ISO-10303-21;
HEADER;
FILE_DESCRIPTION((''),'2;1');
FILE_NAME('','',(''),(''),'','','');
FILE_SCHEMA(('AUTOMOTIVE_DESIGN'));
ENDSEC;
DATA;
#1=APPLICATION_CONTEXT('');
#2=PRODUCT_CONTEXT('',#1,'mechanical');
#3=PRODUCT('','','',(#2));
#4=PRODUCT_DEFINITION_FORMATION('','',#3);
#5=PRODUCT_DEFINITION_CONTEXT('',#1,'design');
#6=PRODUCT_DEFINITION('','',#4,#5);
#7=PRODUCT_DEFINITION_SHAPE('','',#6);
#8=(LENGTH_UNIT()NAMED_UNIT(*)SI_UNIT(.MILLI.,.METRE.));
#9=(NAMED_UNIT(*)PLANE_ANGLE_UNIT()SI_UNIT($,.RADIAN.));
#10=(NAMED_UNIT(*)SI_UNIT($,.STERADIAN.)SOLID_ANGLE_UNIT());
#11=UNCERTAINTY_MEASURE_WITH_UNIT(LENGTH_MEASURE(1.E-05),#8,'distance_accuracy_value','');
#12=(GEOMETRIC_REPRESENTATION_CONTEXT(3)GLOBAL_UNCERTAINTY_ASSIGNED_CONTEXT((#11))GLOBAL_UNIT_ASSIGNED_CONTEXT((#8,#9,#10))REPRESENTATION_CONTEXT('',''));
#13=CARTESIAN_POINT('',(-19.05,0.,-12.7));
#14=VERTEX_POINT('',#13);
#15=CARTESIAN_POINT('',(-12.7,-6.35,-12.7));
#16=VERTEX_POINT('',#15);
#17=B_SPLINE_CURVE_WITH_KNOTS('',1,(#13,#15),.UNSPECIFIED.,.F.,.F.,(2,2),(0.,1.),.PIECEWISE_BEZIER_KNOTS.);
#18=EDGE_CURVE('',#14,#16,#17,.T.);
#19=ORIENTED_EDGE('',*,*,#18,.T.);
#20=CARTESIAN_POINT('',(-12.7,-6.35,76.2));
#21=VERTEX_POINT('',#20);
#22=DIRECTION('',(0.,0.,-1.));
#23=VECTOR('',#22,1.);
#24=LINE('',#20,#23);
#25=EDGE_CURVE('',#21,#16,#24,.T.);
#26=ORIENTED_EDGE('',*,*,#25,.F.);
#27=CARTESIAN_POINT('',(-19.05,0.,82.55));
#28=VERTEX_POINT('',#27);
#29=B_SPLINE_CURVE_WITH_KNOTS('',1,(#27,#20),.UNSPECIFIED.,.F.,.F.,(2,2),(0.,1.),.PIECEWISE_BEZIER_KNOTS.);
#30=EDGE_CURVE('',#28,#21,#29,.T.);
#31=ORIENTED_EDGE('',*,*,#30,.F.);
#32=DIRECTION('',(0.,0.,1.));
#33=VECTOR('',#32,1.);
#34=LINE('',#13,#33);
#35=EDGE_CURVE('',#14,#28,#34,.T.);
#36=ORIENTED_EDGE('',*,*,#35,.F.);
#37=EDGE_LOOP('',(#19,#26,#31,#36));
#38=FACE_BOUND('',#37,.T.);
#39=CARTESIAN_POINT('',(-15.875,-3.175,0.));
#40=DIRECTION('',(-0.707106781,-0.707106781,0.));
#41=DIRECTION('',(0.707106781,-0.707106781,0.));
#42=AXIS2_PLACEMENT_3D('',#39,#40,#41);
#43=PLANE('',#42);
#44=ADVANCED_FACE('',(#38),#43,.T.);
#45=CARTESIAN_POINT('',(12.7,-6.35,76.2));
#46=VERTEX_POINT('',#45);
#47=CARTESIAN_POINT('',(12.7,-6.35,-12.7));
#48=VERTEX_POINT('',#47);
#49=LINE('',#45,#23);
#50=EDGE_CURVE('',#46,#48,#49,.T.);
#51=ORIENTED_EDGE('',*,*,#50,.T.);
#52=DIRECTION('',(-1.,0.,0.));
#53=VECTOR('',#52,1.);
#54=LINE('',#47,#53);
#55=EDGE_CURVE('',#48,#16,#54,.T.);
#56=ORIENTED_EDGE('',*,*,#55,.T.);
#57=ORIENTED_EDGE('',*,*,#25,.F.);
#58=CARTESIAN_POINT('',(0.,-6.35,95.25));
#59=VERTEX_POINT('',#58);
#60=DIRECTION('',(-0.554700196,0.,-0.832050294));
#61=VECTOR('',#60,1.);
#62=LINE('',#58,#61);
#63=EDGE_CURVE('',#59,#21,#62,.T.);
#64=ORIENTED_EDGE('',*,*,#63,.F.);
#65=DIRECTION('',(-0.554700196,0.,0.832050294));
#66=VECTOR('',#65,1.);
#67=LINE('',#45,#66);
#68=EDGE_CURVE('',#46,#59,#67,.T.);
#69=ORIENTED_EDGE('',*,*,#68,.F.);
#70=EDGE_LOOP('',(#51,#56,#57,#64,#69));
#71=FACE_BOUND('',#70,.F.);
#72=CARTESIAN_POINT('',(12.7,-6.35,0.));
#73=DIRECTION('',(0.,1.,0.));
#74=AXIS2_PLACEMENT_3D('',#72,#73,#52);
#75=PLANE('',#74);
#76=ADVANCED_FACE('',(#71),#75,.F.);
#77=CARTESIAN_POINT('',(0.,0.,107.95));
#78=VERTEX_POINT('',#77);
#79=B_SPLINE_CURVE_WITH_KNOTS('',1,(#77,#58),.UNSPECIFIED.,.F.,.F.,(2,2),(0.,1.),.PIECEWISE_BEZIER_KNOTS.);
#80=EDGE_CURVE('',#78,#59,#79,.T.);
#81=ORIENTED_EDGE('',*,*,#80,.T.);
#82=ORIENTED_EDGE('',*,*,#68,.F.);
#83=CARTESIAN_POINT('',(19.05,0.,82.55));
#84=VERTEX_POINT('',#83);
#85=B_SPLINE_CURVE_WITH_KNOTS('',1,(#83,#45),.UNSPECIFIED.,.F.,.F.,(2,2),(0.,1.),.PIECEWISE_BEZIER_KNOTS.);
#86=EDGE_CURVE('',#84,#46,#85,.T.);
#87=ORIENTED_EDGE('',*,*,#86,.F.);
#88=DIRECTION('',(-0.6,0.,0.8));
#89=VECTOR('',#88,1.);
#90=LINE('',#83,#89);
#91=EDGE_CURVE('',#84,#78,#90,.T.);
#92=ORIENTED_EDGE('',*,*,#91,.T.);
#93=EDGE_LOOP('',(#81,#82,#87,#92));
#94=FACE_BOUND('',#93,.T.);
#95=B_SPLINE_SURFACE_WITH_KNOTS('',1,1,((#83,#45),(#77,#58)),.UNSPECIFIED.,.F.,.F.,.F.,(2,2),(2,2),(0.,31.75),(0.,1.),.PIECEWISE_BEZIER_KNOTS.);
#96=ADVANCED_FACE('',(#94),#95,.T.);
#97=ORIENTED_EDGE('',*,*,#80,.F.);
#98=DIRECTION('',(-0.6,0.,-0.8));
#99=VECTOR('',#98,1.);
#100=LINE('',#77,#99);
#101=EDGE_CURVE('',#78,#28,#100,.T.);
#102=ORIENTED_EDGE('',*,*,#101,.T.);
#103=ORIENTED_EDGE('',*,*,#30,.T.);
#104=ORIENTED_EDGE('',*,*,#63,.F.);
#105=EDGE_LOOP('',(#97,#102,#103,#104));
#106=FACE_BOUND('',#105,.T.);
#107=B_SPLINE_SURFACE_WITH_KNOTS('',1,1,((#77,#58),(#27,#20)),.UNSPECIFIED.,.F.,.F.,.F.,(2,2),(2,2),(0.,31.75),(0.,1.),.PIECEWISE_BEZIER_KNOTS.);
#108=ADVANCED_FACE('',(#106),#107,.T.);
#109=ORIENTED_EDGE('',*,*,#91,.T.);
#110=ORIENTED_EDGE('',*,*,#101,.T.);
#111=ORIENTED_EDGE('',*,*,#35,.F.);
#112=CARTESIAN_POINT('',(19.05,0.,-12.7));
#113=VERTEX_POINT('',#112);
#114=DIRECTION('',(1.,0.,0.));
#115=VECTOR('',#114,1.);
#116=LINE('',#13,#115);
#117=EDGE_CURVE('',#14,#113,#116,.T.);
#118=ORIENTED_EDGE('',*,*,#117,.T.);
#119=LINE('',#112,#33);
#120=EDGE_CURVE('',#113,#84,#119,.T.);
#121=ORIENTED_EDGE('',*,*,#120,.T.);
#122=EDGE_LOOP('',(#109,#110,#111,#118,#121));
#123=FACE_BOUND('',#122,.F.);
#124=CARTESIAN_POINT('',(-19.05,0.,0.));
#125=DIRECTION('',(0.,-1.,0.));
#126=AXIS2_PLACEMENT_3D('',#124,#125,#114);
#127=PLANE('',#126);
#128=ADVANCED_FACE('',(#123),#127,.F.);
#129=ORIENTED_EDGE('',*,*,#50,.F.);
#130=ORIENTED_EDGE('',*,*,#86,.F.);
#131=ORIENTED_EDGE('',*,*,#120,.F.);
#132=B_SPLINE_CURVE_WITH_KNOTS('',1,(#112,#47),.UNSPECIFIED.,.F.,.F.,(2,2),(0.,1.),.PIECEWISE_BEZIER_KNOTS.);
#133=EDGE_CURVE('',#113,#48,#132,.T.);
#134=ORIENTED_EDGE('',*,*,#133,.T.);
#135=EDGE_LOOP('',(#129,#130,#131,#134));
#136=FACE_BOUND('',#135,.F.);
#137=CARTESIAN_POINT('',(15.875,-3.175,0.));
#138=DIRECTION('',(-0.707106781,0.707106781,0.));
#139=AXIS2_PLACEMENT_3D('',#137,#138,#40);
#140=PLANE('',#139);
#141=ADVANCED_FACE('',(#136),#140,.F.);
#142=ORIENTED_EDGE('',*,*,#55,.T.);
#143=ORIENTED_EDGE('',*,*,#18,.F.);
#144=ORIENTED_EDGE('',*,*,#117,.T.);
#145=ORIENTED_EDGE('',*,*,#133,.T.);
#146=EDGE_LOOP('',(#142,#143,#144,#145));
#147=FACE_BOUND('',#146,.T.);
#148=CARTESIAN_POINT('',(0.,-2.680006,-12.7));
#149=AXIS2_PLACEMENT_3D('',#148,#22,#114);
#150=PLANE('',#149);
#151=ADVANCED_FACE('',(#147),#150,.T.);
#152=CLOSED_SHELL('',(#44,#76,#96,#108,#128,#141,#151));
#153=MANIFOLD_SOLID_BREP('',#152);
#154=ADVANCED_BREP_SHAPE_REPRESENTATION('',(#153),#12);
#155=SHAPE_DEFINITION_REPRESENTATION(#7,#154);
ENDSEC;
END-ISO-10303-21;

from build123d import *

# Parameters (mm, degrees)
F5_DEPTH = 12.7


with BuildPart() as f3:
    # F0 (on Front) → F3 section 0
    with BuildSketch(Plane.XZ):
        Polygon((-19.05, 0), (0, 0), (19.05, 0), (19.05, 82.55), (0, 107.95), (-19.05, 82.55), align=None)
    # F2 (on offset) → F3 section 1
    with BuildSketch(Plane.XZ.offset(6.35)):
        Polygon((-12.7, 0), (0, 0), (12.7, 0), (12.7, 76.2), (0, 95.25), (-12.7, 76.2), align=None)
    loft()

    # F4 (on face) → F5 (join)
    with BuildSketch(Plane(origin=(0, 0, 0), x_dir=(1, 0, 0), z_dir=(0, 0, -1))):
        with BuildLine():
            Line((-1.0408426169, 0), (0, 0))
            Line((0, 0), (19.05, 0))
            add(Edge.make_bspline(
                [(19.05, 0), (12.7, 6.35)],
                knots=[0, 0, 1, 1], degree=1))
            Line((12.7, 6.35), (-12.7, 6.35))
            add(Edge.make_bspline(
                [(-19.05, 0), (-12.7, 6.35)],
                knots=[0, 0, 1, 1], degree=1))
            Line((-19.05, 0), (-1.0408426169, 0))
        make_face()
    extrude(amount=F5_DEPTH)


solid = f3.part
